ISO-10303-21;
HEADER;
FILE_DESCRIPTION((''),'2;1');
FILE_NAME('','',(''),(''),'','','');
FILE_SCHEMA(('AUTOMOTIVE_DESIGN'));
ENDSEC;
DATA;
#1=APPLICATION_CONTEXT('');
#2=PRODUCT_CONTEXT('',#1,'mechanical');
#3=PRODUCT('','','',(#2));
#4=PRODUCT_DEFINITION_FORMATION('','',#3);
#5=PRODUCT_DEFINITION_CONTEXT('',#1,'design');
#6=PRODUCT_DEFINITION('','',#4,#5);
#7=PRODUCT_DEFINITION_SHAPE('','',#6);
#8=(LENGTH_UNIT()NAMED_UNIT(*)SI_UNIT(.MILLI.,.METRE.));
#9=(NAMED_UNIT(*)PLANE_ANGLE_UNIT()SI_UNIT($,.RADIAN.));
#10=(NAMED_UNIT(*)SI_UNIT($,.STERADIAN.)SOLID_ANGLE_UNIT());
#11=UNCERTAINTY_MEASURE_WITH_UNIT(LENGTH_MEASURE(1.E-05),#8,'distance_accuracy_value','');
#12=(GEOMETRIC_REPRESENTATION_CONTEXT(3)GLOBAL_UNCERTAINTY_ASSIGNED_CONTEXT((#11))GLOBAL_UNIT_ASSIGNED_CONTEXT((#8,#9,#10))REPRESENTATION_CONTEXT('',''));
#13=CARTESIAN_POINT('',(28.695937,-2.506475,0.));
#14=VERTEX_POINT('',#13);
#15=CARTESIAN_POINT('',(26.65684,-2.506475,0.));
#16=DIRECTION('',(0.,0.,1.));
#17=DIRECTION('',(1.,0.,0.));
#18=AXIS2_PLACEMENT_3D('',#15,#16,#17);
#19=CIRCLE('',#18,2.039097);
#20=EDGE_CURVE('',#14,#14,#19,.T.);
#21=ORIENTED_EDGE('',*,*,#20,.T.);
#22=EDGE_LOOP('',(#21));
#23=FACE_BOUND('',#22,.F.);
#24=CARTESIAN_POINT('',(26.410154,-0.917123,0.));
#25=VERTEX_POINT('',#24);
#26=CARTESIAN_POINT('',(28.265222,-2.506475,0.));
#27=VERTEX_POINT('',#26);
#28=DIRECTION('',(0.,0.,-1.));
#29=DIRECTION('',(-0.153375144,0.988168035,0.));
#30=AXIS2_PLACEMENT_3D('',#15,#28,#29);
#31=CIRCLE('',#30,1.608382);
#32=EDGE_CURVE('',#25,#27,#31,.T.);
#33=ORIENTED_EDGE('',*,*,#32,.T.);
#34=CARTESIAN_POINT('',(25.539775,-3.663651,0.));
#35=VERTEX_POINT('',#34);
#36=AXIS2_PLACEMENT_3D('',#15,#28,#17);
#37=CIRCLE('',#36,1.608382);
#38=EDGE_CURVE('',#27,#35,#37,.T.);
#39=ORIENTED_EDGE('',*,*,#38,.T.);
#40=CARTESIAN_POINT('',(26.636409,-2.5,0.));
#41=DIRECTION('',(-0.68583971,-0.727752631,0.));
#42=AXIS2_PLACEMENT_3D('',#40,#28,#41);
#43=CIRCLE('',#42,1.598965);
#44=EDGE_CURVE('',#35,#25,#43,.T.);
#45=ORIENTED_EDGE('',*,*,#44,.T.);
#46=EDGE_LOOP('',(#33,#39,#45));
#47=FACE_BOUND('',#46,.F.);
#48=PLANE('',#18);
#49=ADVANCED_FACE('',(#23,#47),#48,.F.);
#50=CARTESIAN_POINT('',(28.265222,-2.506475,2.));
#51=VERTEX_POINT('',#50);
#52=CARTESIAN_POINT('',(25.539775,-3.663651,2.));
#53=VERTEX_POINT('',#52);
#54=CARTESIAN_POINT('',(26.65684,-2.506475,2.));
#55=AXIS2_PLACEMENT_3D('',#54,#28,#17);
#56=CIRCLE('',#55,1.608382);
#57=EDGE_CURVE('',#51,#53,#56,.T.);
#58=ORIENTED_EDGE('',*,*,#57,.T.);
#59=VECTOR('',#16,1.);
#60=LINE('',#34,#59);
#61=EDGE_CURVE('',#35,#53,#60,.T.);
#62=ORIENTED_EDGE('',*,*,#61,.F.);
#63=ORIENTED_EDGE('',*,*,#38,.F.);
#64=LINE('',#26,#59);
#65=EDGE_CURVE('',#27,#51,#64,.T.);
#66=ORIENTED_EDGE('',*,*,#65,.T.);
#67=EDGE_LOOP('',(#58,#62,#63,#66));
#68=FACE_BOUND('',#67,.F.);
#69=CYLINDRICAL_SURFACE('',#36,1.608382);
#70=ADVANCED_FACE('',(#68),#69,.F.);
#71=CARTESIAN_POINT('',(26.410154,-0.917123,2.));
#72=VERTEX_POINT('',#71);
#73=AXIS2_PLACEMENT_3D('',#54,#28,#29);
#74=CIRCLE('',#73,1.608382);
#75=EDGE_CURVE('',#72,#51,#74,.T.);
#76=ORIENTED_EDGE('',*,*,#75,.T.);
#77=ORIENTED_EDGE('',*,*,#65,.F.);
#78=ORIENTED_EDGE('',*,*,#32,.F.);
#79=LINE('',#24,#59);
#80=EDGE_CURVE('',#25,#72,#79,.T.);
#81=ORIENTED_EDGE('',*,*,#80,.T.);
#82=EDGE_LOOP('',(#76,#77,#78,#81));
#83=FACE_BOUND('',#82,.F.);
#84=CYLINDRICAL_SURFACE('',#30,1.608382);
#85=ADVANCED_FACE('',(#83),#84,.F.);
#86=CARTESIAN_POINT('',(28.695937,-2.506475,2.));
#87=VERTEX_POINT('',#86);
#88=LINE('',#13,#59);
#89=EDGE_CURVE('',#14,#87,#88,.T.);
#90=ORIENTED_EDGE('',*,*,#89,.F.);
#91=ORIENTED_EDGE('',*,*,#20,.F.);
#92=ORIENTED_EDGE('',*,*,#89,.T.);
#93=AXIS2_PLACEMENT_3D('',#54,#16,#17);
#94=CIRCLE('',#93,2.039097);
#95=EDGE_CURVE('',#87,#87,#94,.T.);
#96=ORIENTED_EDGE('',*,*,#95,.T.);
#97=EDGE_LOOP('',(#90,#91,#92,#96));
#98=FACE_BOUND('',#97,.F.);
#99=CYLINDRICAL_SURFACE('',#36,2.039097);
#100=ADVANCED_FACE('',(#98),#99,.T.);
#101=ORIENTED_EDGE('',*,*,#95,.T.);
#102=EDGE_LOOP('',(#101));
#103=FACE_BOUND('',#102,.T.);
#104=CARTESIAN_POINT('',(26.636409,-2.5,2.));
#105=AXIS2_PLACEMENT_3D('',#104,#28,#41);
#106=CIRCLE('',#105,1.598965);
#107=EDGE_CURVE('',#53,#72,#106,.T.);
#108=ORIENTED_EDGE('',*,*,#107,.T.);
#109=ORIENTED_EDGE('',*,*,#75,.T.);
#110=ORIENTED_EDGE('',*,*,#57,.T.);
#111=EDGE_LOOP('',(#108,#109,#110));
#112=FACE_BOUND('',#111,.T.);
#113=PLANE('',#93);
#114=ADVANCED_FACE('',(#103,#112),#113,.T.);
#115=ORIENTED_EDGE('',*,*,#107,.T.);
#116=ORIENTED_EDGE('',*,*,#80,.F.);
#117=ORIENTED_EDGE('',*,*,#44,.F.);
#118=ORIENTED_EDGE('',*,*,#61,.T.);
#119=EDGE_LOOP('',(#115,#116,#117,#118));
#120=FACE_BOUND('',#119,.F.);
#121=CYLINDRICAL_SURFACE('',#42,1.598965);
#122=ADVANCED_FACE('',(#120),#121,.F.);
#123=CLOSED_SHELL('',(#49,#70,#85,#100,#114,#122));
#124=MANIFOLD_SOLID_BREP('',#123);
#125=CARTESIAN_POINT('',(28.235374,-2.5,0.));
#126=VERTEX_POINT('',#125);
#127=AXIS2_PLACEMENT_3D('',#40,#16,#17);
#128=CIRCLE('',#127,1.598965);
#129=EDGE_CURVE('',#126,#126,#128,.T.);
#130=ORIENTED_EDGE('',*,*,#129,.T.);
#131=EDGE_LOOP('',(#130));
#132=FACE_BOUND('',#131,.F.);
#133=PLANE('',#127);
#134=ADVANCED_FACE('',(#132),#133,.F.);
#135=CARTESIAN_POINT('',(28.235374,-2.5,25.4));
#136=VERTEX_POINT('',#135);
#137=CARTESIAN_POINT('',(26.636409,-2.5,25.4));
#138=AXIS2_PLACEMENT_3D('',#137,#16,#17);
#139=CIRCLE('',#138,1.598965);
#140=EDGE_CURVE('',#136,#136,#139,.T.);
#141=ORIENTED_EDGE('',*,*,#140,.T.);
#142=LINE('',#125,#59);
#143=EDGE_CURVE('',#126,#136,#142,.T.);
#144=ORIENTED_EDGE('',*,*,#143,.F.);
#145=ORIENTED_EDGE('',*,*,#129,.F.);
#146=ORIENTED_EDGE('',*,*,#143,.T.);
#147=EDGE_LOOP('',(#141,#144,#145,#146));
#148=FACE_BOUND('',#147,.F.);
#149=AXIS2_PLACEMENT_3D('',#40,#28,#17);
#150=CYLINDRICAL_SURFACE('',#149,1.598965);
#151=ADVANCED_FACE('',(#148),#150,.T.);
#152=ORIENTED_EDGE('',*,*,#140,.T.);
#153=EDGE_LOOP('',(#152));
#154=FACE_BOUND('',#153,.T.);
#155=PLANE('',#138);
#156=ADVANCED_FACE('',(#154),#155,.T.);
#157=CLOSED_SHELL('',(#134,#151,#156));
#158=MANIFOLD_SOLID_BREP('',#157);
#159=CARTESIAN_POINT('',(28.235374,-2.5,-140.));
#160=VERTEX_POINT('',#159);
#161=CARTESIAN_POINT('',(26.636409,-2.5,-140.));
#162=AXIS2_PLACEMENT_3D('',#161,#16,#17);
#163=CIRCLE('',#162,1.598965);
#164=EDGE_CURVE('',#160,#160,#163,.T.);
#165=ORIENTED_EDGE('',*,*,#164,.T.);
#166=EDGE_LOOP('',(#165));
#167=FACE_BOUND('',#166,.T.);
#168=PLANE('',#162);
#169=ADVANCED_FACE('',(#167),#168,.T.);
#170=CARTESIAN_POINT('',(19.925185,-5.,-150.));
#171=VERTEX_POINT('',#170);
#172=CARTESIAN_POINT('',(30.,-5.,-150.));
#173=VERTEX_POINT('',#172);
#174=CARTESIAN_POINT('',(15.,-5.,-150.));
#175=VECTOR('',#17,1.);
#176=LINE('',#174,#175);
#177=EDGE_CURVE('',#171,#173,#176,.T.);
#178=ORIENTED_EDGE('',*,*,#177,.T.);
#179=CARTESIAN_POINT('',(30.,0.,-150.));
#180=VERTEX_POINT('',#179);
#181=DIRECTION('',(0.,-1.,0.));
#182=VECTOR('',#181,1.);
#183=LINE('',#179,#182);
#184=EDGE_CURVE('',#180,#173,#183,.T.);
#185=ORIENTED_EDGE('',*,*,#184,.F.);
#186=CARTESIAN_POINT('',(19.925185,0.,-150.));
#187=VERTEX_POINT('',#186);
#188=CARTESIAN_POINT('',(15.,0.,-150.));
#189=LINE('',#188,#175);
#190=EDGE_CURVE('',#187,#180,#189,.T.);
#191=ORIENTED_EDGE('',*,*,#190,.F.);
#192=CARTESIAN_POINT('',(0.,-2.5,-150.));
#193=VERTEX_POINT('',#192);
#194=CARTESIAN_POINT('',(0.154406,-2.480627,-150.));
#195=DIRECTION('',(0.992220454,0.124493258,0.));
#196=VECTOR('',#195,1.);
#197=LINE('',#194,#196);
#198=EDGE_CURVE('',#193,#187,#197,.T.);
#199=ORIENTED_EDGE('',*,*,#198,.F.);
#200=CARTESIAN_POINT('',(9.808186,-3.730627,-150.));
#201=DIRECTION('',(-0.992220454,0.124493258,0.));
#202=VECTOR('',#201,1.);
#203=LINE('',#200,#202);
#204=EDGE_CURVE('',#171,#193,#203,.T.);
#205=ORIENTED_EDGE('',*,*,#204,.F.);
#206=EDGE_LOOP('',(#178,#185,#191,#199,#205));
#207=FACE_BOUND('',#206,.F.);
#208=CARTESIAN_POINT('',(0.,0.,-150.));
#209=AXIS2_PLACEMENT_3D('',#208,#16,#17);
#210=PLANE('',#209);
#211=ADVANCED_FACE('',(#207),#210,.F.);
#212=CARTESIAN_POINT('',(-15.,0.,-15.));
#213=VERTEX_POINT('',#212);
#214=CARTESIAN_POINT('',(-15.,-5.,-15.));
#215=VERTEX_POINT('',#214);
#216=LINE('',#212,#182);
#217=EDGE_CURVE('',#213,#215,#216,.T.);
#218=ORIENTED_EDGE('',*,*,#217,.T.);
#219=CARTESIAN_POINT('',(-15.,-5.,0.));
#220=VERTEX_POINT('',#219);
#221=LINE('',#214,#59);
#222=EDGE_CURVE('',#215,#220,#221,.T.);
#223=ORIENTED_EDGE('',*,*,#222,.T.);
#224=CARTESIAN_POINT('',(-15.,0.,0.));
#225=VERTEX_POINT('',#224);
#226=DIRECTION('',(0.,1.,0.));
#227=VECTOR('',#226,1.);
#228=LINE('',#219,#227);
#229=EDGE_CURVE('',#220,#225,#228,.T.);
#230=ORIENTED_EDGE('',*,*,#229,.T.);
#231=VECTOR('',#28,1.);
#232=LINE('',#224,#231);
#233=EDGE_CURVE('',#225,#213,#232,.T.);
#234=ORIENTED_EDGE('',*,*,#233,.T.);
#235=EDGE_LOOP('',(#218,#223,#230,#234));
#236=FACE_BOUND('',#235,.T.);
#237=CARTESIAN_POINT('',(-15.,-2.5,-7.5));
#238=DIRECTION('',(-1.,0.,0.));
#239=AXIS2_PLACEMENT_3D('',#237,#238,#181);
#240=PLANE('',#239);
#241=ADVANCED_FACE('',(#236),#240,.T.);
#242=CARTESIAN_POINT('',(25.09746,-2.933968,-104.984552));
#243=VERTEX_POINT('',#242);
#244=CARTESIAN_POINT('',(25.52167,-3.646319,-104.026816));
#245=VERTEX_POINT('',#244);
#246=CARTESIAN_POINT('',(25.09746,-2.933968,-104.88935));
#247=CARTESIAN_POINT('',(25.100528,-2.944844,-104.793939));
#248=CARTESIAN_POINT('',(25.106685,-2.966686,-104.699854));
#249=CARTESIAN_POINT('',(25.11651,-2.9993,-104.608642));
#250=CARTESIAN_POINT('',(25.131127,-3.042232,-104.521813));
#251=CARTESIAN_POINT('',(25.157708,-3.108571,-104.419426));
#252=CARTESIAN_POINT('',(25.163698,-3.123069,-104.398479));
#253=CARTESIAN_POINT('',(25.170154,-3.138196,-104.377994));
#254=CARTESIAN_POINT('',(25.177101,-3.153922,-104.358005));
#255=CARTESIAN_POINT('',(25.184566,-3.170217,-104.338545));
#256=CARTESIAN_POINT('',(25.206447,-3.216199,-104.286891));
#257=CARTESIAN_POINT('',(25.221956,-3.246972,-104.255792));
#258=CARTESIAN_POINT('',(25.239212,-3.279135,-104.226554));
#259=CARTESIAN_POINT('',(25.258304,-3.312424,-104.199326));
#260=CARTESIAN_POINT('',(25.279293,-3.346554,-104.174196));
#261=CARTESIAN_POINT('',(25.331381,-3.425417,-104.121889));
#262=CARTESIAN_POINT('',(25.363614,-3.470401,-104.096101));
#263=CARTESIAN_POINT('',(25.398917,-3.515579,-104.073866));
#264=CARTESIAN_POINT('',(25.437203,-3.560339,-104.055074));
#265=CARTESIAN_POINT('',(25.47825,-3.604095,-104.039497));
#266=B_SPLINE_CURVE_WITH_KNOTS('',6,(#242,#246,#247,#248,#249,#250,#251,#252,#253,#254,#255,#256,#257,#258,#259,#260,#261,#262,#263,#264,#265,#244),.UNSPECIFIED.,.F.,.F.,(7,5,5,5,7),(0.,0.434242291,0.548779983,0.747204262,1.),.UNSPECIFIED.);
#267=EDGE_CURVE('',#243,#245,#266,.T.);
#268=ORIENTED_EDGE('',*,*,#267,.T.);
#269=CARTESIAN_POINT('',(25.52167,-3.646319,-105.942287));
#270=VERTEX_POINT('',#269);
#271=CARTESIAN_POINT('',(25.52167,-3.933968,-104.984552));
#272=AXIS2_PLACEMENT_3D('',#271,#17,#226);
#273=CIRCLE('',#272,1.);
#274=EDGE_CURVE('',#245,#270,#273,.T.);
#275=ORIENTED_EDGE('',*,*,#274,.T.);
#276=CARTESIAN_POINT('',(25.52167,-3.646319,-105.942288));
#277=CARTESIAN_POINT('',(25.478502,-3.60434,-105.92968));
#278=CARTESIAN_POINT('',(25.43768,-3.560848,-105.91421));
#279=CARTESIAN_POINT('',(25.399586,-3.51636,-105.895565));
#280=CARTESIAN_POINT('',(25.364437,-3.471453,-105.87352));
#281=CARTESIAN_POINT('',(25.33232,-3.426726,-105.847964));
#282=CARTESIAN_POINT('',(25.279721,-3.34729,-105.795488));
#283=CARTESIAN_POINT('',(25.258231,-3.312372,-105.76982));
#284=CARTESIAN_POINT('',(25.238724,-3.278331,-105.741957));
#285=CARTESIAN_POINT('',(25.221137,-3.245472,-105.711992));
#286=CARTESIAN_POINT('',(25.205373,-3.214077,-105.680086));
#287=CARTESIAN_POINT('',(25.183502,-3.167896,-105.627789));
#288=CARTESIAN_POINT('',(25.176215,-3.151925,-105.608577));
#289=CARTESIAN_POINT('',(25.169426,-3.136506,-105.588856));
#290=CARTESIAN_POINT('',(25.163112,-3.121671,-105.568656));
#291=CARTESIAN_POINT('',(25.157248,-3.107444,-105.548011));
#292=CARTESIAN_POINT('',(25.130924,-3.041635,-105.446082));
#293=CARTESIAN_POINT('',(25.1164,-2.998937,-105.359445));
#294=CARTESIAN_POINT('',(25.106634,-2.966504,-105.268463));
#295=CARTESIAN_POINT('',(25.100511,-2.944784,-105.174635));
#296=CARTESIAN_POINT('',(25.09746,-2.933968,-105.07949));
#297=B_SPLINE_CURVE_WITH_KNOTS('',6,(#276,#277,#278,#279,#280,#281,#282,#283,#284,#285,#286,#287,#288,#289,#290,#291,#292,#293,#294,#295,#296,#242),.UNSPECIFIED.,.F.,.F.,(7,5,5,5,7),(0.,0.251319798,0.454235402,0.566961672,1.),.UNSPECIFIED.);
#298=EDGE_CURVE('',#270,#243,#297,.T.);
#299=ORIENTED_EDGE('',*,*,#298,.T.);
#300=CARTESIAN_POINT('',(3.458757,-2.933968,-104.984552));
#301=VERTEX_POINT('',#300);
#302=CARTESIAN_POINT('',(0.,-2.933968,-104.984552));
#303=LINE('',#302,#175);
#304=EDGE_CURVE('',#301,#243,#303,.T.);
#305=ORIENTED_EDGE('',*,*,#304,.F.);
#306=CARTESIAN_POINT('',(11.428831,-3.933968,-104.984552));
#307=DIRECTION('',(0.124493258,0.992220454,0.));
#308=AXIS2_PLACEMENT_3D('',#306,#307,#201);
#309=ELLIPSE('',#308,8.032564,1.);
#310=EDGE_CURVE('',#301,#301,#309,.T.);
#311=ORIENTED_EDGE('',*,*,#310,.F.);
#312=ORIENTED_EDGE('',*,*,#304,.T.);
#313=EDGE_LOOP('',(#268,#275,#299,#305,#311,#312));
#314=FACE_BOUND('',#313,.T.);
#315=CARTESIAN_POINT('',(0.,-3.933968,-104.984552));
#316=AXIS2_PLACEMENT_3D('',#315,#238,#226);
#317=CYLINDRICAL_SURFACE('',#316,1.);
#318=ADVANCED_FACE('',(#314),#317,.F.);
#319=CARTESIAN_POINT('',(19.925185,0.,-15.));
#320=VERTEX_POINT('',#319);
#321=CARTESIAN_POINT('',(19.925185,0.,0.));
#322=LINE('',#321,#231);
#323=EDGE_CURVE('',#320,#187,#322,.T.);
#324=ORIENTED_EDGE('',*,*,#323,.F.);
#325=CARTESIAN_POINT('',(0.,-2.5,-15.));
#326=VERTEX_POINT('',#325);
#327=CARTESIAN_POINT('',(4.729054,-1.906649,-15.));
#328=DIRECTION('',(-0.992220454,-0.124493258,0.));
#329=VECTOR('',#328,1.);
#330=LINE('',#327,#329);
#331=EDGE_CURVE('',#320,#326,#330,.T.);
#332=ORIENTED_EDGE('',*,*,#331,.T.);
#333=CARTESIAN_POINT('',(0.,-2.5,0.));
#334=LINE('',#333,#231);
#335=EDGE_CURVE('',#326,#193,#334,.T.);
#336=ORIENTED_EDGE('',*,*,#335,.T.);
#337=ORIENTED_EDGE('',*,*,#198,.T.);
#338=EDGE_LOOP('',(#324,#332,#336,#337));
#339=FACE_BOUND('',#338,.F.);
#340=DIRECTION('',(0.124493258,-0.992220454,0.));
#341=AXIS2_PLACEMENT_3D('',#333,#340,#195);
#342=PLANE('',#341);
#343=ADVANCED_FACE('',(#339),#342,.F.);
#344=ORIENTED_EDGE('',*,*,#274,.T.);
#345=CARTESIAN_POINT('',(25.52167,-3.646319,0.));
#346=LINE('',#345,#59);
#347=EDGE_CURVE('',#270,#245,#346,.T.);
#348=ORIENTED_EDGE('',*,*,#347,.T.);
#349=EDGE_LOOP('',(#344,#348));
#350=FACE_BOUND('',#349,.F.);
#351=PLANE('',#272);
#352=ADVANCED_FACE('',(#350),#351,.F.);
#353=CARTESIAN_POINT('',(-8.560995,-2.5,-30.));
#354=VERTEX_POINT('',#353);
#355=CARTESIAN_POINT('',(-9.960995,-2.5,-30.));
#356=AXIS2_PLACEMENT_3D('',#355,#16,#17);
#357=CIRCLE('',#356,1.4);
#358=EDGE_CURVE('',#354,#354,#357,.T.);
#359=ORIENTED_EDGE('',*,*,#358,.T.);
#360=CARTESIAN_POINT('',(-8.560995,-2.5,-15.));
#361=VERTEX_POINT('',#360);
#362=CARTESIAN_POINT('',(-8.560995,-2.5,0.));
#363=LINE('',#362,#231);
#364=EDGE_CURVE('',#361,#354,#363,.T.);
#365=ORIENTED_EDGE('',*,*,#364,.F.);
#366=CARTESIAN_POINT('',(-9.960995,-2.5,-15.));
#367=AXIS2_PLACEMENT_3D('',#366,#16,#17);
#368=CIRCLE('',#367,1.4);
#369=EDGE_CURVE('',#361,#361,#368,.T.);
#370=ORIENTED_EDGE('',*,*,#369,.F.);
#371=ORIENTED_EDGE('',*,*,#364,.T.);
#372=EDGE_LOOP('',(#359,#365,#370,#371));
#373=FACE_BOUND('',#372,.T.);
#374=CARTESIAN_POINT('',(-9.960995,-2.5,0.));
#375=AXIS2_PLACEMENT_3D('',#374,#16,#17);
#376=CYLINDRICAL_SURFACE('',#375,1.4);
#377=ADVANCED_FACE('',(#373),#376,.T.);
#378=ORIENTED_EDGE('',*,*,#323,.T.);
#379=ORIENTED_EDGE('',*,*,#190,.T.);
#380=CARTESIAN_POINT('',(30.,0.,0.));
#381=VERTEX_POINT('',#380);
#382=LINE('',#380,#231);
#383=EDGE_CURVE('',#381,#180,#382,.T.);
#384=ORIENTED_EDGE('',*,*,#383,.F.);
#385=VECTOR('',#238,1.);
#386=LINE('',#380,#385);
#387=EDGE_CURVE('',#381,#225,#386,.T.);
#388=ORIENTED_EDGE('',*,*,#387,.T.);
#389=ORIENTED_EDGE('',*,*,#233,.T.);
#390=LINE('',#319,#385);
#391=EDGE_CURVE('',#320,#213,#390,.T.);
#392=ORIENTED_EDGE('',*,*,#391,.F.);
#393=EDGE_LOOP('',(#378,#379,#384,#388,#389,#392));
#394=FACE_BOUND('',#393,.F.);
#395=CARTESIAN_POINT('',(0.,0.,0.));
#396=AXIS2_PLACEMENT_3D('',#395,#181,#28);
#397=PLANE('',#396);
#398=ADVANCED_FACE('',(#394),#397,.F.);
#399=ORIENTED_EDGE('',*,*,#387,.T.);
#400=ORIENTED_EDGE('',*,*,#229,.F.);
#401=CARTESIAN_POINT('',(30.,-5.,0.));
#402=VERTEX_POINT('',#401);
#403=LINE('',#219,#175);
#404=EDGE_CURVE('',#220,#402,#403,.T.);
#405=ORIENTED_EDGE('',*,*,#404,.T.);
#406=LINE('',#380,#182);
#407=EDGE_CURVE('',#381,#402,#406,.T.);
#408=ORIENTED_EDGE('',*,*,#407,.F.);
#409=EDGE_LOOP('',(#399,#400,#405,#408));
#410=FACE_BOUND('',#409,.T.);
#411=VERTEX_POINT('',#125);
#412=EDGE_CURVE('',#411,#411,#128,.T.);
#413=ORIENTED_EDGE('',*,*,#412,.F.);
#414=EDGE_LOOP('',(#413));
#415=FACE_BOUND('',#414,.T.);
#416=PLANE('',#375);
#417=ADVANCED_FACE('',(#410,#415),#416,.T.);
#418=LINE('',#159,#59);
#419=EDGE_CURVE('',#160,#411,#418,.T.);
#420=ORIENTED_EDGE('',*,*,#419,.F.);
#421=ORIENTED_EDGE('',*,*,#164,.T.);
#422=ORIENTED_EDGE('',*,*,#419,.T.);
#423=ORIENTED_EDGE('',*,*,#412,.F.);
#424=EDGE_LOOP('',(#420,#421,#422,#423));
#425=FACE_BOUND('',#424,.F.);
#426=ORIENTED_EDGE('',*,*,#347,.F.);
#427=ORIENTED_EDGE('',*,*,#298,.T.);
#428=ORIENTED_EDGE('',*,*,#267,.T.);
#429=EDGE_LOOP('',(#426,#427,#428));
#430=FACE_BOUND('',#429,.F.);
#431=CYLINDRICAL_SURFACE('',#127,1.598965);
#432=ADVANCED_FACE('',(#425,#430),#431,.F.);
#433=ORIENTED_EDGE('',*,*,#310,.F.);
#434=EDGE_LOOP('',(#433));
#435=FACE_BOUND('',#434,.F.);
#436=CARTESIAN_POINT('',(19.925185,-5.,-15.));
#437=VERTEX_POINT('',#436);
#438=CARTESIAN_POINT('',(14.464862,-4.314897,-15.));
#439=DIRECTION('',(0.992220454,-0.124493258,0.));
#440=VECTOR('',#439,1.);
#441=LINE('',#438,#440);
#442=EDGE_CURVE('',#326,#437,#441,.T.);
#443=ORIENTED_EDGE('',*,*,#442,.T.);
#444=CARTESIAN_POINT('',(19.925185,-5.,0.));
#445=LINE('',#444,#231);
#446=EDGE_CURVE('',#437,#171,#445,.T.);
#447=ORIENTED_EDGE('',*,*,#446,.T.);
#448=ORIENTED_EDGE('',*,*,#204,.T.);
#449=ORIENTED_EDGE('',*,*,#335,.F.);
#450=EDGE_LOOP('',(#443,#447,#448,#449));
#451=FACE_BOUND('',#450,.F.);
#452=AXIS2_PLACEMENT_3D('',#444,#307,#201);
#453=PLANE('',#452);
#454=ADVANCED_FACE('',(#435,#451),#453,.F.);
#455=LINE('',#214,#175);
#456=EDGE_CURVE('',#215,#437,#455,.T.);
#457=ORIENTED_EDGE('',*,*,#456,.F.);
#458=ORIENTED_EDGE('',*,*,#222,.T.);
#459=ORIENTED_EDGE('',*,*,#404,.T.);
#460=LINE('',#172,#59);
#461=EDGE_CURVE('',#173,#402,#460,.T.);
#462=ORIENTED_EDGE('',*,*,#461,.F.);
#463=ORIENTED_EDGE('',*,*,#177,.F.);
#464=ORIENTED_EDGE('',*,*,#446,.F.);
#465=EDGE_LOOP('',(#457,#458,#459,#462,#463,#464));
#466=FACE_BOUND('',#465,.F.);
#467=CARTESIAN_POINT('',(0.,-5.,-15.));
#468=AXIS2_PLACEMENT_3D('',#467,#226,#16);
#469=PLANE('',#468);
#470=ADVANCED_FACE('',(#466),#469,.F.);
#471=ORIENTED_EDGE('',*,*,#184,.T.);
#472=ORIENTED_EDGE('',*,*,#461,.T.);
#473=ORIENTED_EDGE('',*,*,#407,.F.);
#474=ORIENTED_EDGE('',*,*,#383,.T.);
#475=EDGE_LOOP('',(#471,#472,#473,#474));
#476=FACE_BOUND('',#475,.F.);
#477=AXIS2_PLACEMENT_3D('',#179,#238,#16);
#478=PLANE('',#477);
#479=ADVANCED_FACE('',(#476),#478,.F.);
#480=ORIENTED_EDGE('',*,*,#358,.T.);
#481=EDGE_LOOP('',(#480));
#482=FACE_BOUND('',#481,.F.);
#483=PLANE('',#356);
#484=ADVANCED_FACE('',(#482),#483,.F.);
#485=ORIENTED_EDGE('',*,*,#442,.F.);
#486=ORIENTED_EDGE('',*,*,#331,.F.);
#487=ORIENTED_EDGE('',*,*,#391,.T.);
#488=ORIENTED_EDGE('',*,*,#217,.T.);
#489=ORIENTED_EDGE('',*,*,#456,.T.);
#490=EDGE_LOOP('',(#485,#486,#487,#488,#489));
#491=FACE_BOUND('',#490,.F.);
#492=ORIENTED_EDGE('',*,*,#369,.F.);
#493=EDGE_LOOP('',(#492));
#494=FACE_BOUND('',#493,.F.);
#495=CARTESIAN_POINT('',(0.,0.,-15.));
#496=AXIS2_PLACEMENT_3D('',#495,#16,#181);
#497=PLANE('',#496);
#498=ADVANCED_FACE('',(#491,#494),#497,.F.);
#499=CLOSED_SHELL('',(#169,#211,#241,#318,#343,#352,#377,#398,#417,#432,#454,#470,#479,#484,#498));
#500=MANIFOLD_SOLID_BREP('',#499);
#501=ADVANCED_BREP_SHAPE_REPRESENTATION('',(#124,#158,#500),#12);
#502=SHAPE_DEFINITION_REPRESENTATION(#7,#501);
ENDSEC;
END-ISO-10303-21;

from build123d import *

# Parameters (mm, degrees)
F0_W      = 30
F0_H      = 150
F1_DEPTH  = 5
F3_DEPTH  = 150.001
F2_R      = 1.5989652731
F4_DEPTH  = 140
F5_R      = 1
F6_DEPTH  = 25.5216695368
F7_DEPTH  = 15
F9_DEPTH  = 15
F10_R     = 1.4
F11_DEPTH = 30
F13_DEPTH = 25.4
F12_R     = 2.0390969853
F14_DEPTH = 2


with BuildPart() as f1:
    # F0 (on Front) → F1 (new body)
    with BuildSketch(Plane.XZ):
        with Locations((15, -75)):
            Rectangle(F0_W, F0_H)
    extrude(amount=F1_DEPTH)

    # F2 (on face) → F3 (cut, through all)
    with BuildSketch(Plane.XY):
        Polygon((0, -2.5), (19.9251845479, 0), (0, 0), align=None)
        Polygon((19.9251845479, -5), (0, -2.5), (0, -5), align=None)
    extrude(amount=-F3_DEPTH, mode=Mode.SUBTRACT)

    # F2 (on face) → F4 (cut)
    with BuildSketch(Plane.XY):
        with Locations((26.6364086419, -2.5)):
            Circle(F2_R)
    extrude(amount=-F4_DEPTH, mode=Mode.SUBTRACT)

    # F5 (on Right) → F6 (cut)
    with BuildSketch(Plane.YZ):
        with Locations((-3.9339680225, -104.9845516682)):
            Circle(F5_R)
    extrude(amount=F6_DEPTH, mode=Mode.SUBTRACT)

    # F2 (on face) → F7 (join)
    with BuildSketch(Plane.XY):
        Polygon((0, -2.5), (19.9251845479, 0), (0, 0), align=None)
        Polygon((30, 0), (19.9251845479, 0), (0, -2.5), (19.9251845479, -5), (30, -5), align=None)
        with Locations((26.6364086419, -2.5)):
            Circle(F2_R, mode=Mode.SUBTRACT)
        Polygon((19.9251845479, -5), (0, -2.5), (0, -5), align=None)
    extrude(amount=-F7_DEPTH)

    # F8 (on face) → F9 (join)
    with BuildSketch(Plane(origin=(0, 0, 0), x_dir=(0, -1, 0), z_dir=(-1, 0, 0))):
        Polygon((5, 0), (0, 0), (0, -15), (2.5, -15), (5, -15), align=None)
    extrude(amount=F9_DEPTH)

    # F10 (on face) → F11 (join)
    with BuildSketch(Plane.XY):
        with Locations((-9.9609950557, -2.5)):
            Circle(F10_R)
    extrude(amount=-F11_DEPTH)


with BuildPart() as f13:
    # F2 (on face) → F13 (new body)
    with BuildSketch(Plane.XY):
        with Locations((26.6364086419, -2.5)):
            Circle(F2_R)
    extrude(amount=F13_DEPTH)


with BuildPart() as f14:
    # F12 (on face) → F14 (new body)
    with BuildSketch(Plane.XY):
        with Locations((26.6568399966, -2.5064747315)):
            Circle(F12_R)
        with BuildLine():
            ThreePointArc((26.4101542038, -0.9171232285), (27.7032928469, -1.2850704117), (28.2652218171, -2.5064747315))
            ThreePointArc((28.2652218171, -2.5064747315), (27.2854196118, -3.9869407891), (25.5397747623, -3.6636511842))
            ThreePointArc((25.5397747623, -3.6636511842), (25.112150682, -2.0169600262), (26.4101542038, -0.9171232285))
        make_face(mode=Mode.SUBTRACT)
    extrude(amount=F14_DEPTH)


solid = Compound([f1.part, f13.part, f14.part])
